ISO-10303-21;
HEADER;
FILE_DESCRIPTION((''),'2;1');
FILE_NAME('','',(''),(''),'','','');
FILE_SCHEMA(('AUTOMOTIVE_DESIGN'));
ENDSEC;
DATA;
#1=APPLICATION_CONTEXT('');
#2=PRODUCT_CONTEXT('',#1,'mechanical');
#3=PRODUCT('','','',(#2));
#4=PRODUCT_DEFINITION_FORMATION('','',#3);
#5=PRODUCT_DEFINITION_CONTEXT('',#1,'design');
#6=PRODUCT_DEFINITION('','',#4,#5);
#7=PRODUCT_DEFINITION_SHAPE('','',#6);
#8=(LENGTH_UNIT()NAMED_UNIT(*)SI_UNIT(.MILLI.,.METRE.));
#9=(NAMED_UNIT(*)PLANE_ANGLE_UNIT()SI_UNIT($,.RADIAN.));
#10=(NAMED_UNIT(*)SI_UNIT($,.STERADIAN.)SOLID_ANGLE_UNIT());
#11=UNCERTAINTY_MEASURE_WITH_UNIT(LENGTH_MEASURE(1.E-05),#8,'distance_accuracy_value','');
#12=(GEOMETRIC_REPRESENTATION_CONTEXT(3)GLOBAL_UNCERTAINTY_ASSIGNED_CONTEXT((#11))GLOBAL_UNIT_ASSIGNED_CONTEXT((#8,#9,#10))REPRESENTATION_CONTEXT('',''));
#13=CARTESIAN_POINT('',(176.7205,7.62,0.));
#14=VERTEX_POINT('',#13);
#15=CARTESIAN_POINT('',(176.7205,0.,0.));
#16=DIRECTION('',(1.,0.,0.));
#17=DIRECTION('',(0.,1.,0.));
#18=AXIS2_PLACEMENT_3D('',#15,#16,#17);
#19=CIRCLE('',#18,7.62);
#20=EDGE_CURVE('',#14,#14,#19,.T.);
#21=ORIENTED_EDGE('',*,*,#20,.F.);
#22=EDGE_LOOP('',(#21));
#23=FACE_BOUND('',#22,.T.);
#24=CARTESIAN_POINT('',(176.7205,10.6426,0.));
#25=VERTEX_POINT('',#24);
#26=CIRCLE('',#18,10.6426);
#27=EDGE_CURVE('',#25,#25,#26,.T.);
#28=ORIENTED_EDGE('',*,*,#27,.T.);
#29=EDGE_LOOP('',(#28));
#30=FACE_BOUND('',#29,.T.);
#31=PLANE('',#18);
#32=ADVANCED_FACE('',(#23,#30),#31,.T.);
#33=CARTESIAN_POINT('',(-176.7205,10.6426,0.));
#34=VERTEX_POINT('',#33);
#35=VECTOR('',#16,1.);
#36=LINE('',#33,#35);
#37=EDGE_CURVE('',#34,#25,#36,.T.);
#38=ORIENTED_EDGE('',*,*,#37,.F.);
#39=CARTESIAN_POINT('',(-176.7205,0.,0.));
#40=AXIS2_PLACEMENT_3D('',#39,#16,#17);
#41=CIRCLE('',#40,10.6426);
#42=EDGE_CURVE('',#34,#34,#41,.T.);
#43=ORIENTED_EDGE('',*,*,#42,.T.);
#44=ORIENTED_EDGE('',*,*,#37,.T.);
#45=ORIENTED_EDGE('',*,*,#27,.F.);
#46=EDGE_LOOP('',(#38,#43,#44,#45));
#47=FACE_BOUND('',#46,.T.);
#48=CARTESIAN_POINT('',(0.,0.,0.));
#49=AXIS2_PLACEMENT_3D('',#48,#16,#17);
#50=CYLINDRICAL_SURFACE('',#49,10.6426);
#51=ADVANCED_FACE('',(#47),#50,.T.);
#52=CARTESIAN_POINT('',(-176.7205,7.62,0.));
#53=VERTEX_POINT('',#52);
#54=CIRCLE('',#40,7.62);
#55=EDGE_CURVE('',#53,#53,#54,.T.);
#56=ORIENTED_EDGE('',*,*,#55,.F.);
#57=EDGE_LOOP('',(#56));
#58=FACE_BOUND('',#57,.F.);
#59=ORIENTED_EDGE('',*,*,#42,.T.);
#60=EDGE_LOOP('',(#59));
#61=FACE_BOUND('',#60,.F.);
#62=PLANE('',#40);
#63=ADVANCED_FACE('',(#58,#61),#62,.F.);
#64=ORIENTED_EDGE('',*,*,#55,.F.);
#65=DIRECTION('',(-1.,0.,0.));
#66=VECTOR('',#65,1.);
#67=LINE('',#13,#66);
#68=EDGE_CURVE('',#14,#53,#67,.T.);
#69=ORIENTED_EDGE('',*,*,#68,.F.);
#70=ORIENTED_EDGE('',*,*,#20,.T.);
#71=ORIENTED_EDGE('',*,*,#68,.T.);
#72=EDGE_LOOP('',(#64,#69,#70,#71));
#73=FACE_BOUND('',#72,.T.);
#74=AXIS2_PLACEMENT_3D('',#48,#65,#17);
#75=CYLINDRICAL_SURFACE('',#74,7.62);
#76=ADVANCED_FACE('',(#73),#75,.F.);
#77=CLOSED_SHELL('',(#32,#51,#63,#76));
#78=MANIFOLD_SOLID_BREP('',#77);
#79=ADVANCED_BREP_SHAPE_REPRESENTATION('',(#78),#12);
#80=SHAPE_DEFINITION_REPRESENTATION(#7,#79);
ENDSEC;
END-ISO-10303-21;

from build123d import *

# Parameters (mm, degrees)
F0_R     = 10.6426
F0_R_2   = 7.62
F1_DEPTH = 176.7205


# Not quite as in the source:
# - a length typed as a fraction of an inch, garbled in the dataset ("3 / 203.2 mm" for 3/8 in), is restored


with BuildPart() as f1:
    # F0 (on Right) → F1 (new body, symmetric)
    with BuildSketch(Plane.YZ):
        Circle(F0_R)
        Circle(F0_R_2, mode=Mode.SUBTRACT)
    extrude(amount=F1_DEPTH, both=True)


solid = f1.part
